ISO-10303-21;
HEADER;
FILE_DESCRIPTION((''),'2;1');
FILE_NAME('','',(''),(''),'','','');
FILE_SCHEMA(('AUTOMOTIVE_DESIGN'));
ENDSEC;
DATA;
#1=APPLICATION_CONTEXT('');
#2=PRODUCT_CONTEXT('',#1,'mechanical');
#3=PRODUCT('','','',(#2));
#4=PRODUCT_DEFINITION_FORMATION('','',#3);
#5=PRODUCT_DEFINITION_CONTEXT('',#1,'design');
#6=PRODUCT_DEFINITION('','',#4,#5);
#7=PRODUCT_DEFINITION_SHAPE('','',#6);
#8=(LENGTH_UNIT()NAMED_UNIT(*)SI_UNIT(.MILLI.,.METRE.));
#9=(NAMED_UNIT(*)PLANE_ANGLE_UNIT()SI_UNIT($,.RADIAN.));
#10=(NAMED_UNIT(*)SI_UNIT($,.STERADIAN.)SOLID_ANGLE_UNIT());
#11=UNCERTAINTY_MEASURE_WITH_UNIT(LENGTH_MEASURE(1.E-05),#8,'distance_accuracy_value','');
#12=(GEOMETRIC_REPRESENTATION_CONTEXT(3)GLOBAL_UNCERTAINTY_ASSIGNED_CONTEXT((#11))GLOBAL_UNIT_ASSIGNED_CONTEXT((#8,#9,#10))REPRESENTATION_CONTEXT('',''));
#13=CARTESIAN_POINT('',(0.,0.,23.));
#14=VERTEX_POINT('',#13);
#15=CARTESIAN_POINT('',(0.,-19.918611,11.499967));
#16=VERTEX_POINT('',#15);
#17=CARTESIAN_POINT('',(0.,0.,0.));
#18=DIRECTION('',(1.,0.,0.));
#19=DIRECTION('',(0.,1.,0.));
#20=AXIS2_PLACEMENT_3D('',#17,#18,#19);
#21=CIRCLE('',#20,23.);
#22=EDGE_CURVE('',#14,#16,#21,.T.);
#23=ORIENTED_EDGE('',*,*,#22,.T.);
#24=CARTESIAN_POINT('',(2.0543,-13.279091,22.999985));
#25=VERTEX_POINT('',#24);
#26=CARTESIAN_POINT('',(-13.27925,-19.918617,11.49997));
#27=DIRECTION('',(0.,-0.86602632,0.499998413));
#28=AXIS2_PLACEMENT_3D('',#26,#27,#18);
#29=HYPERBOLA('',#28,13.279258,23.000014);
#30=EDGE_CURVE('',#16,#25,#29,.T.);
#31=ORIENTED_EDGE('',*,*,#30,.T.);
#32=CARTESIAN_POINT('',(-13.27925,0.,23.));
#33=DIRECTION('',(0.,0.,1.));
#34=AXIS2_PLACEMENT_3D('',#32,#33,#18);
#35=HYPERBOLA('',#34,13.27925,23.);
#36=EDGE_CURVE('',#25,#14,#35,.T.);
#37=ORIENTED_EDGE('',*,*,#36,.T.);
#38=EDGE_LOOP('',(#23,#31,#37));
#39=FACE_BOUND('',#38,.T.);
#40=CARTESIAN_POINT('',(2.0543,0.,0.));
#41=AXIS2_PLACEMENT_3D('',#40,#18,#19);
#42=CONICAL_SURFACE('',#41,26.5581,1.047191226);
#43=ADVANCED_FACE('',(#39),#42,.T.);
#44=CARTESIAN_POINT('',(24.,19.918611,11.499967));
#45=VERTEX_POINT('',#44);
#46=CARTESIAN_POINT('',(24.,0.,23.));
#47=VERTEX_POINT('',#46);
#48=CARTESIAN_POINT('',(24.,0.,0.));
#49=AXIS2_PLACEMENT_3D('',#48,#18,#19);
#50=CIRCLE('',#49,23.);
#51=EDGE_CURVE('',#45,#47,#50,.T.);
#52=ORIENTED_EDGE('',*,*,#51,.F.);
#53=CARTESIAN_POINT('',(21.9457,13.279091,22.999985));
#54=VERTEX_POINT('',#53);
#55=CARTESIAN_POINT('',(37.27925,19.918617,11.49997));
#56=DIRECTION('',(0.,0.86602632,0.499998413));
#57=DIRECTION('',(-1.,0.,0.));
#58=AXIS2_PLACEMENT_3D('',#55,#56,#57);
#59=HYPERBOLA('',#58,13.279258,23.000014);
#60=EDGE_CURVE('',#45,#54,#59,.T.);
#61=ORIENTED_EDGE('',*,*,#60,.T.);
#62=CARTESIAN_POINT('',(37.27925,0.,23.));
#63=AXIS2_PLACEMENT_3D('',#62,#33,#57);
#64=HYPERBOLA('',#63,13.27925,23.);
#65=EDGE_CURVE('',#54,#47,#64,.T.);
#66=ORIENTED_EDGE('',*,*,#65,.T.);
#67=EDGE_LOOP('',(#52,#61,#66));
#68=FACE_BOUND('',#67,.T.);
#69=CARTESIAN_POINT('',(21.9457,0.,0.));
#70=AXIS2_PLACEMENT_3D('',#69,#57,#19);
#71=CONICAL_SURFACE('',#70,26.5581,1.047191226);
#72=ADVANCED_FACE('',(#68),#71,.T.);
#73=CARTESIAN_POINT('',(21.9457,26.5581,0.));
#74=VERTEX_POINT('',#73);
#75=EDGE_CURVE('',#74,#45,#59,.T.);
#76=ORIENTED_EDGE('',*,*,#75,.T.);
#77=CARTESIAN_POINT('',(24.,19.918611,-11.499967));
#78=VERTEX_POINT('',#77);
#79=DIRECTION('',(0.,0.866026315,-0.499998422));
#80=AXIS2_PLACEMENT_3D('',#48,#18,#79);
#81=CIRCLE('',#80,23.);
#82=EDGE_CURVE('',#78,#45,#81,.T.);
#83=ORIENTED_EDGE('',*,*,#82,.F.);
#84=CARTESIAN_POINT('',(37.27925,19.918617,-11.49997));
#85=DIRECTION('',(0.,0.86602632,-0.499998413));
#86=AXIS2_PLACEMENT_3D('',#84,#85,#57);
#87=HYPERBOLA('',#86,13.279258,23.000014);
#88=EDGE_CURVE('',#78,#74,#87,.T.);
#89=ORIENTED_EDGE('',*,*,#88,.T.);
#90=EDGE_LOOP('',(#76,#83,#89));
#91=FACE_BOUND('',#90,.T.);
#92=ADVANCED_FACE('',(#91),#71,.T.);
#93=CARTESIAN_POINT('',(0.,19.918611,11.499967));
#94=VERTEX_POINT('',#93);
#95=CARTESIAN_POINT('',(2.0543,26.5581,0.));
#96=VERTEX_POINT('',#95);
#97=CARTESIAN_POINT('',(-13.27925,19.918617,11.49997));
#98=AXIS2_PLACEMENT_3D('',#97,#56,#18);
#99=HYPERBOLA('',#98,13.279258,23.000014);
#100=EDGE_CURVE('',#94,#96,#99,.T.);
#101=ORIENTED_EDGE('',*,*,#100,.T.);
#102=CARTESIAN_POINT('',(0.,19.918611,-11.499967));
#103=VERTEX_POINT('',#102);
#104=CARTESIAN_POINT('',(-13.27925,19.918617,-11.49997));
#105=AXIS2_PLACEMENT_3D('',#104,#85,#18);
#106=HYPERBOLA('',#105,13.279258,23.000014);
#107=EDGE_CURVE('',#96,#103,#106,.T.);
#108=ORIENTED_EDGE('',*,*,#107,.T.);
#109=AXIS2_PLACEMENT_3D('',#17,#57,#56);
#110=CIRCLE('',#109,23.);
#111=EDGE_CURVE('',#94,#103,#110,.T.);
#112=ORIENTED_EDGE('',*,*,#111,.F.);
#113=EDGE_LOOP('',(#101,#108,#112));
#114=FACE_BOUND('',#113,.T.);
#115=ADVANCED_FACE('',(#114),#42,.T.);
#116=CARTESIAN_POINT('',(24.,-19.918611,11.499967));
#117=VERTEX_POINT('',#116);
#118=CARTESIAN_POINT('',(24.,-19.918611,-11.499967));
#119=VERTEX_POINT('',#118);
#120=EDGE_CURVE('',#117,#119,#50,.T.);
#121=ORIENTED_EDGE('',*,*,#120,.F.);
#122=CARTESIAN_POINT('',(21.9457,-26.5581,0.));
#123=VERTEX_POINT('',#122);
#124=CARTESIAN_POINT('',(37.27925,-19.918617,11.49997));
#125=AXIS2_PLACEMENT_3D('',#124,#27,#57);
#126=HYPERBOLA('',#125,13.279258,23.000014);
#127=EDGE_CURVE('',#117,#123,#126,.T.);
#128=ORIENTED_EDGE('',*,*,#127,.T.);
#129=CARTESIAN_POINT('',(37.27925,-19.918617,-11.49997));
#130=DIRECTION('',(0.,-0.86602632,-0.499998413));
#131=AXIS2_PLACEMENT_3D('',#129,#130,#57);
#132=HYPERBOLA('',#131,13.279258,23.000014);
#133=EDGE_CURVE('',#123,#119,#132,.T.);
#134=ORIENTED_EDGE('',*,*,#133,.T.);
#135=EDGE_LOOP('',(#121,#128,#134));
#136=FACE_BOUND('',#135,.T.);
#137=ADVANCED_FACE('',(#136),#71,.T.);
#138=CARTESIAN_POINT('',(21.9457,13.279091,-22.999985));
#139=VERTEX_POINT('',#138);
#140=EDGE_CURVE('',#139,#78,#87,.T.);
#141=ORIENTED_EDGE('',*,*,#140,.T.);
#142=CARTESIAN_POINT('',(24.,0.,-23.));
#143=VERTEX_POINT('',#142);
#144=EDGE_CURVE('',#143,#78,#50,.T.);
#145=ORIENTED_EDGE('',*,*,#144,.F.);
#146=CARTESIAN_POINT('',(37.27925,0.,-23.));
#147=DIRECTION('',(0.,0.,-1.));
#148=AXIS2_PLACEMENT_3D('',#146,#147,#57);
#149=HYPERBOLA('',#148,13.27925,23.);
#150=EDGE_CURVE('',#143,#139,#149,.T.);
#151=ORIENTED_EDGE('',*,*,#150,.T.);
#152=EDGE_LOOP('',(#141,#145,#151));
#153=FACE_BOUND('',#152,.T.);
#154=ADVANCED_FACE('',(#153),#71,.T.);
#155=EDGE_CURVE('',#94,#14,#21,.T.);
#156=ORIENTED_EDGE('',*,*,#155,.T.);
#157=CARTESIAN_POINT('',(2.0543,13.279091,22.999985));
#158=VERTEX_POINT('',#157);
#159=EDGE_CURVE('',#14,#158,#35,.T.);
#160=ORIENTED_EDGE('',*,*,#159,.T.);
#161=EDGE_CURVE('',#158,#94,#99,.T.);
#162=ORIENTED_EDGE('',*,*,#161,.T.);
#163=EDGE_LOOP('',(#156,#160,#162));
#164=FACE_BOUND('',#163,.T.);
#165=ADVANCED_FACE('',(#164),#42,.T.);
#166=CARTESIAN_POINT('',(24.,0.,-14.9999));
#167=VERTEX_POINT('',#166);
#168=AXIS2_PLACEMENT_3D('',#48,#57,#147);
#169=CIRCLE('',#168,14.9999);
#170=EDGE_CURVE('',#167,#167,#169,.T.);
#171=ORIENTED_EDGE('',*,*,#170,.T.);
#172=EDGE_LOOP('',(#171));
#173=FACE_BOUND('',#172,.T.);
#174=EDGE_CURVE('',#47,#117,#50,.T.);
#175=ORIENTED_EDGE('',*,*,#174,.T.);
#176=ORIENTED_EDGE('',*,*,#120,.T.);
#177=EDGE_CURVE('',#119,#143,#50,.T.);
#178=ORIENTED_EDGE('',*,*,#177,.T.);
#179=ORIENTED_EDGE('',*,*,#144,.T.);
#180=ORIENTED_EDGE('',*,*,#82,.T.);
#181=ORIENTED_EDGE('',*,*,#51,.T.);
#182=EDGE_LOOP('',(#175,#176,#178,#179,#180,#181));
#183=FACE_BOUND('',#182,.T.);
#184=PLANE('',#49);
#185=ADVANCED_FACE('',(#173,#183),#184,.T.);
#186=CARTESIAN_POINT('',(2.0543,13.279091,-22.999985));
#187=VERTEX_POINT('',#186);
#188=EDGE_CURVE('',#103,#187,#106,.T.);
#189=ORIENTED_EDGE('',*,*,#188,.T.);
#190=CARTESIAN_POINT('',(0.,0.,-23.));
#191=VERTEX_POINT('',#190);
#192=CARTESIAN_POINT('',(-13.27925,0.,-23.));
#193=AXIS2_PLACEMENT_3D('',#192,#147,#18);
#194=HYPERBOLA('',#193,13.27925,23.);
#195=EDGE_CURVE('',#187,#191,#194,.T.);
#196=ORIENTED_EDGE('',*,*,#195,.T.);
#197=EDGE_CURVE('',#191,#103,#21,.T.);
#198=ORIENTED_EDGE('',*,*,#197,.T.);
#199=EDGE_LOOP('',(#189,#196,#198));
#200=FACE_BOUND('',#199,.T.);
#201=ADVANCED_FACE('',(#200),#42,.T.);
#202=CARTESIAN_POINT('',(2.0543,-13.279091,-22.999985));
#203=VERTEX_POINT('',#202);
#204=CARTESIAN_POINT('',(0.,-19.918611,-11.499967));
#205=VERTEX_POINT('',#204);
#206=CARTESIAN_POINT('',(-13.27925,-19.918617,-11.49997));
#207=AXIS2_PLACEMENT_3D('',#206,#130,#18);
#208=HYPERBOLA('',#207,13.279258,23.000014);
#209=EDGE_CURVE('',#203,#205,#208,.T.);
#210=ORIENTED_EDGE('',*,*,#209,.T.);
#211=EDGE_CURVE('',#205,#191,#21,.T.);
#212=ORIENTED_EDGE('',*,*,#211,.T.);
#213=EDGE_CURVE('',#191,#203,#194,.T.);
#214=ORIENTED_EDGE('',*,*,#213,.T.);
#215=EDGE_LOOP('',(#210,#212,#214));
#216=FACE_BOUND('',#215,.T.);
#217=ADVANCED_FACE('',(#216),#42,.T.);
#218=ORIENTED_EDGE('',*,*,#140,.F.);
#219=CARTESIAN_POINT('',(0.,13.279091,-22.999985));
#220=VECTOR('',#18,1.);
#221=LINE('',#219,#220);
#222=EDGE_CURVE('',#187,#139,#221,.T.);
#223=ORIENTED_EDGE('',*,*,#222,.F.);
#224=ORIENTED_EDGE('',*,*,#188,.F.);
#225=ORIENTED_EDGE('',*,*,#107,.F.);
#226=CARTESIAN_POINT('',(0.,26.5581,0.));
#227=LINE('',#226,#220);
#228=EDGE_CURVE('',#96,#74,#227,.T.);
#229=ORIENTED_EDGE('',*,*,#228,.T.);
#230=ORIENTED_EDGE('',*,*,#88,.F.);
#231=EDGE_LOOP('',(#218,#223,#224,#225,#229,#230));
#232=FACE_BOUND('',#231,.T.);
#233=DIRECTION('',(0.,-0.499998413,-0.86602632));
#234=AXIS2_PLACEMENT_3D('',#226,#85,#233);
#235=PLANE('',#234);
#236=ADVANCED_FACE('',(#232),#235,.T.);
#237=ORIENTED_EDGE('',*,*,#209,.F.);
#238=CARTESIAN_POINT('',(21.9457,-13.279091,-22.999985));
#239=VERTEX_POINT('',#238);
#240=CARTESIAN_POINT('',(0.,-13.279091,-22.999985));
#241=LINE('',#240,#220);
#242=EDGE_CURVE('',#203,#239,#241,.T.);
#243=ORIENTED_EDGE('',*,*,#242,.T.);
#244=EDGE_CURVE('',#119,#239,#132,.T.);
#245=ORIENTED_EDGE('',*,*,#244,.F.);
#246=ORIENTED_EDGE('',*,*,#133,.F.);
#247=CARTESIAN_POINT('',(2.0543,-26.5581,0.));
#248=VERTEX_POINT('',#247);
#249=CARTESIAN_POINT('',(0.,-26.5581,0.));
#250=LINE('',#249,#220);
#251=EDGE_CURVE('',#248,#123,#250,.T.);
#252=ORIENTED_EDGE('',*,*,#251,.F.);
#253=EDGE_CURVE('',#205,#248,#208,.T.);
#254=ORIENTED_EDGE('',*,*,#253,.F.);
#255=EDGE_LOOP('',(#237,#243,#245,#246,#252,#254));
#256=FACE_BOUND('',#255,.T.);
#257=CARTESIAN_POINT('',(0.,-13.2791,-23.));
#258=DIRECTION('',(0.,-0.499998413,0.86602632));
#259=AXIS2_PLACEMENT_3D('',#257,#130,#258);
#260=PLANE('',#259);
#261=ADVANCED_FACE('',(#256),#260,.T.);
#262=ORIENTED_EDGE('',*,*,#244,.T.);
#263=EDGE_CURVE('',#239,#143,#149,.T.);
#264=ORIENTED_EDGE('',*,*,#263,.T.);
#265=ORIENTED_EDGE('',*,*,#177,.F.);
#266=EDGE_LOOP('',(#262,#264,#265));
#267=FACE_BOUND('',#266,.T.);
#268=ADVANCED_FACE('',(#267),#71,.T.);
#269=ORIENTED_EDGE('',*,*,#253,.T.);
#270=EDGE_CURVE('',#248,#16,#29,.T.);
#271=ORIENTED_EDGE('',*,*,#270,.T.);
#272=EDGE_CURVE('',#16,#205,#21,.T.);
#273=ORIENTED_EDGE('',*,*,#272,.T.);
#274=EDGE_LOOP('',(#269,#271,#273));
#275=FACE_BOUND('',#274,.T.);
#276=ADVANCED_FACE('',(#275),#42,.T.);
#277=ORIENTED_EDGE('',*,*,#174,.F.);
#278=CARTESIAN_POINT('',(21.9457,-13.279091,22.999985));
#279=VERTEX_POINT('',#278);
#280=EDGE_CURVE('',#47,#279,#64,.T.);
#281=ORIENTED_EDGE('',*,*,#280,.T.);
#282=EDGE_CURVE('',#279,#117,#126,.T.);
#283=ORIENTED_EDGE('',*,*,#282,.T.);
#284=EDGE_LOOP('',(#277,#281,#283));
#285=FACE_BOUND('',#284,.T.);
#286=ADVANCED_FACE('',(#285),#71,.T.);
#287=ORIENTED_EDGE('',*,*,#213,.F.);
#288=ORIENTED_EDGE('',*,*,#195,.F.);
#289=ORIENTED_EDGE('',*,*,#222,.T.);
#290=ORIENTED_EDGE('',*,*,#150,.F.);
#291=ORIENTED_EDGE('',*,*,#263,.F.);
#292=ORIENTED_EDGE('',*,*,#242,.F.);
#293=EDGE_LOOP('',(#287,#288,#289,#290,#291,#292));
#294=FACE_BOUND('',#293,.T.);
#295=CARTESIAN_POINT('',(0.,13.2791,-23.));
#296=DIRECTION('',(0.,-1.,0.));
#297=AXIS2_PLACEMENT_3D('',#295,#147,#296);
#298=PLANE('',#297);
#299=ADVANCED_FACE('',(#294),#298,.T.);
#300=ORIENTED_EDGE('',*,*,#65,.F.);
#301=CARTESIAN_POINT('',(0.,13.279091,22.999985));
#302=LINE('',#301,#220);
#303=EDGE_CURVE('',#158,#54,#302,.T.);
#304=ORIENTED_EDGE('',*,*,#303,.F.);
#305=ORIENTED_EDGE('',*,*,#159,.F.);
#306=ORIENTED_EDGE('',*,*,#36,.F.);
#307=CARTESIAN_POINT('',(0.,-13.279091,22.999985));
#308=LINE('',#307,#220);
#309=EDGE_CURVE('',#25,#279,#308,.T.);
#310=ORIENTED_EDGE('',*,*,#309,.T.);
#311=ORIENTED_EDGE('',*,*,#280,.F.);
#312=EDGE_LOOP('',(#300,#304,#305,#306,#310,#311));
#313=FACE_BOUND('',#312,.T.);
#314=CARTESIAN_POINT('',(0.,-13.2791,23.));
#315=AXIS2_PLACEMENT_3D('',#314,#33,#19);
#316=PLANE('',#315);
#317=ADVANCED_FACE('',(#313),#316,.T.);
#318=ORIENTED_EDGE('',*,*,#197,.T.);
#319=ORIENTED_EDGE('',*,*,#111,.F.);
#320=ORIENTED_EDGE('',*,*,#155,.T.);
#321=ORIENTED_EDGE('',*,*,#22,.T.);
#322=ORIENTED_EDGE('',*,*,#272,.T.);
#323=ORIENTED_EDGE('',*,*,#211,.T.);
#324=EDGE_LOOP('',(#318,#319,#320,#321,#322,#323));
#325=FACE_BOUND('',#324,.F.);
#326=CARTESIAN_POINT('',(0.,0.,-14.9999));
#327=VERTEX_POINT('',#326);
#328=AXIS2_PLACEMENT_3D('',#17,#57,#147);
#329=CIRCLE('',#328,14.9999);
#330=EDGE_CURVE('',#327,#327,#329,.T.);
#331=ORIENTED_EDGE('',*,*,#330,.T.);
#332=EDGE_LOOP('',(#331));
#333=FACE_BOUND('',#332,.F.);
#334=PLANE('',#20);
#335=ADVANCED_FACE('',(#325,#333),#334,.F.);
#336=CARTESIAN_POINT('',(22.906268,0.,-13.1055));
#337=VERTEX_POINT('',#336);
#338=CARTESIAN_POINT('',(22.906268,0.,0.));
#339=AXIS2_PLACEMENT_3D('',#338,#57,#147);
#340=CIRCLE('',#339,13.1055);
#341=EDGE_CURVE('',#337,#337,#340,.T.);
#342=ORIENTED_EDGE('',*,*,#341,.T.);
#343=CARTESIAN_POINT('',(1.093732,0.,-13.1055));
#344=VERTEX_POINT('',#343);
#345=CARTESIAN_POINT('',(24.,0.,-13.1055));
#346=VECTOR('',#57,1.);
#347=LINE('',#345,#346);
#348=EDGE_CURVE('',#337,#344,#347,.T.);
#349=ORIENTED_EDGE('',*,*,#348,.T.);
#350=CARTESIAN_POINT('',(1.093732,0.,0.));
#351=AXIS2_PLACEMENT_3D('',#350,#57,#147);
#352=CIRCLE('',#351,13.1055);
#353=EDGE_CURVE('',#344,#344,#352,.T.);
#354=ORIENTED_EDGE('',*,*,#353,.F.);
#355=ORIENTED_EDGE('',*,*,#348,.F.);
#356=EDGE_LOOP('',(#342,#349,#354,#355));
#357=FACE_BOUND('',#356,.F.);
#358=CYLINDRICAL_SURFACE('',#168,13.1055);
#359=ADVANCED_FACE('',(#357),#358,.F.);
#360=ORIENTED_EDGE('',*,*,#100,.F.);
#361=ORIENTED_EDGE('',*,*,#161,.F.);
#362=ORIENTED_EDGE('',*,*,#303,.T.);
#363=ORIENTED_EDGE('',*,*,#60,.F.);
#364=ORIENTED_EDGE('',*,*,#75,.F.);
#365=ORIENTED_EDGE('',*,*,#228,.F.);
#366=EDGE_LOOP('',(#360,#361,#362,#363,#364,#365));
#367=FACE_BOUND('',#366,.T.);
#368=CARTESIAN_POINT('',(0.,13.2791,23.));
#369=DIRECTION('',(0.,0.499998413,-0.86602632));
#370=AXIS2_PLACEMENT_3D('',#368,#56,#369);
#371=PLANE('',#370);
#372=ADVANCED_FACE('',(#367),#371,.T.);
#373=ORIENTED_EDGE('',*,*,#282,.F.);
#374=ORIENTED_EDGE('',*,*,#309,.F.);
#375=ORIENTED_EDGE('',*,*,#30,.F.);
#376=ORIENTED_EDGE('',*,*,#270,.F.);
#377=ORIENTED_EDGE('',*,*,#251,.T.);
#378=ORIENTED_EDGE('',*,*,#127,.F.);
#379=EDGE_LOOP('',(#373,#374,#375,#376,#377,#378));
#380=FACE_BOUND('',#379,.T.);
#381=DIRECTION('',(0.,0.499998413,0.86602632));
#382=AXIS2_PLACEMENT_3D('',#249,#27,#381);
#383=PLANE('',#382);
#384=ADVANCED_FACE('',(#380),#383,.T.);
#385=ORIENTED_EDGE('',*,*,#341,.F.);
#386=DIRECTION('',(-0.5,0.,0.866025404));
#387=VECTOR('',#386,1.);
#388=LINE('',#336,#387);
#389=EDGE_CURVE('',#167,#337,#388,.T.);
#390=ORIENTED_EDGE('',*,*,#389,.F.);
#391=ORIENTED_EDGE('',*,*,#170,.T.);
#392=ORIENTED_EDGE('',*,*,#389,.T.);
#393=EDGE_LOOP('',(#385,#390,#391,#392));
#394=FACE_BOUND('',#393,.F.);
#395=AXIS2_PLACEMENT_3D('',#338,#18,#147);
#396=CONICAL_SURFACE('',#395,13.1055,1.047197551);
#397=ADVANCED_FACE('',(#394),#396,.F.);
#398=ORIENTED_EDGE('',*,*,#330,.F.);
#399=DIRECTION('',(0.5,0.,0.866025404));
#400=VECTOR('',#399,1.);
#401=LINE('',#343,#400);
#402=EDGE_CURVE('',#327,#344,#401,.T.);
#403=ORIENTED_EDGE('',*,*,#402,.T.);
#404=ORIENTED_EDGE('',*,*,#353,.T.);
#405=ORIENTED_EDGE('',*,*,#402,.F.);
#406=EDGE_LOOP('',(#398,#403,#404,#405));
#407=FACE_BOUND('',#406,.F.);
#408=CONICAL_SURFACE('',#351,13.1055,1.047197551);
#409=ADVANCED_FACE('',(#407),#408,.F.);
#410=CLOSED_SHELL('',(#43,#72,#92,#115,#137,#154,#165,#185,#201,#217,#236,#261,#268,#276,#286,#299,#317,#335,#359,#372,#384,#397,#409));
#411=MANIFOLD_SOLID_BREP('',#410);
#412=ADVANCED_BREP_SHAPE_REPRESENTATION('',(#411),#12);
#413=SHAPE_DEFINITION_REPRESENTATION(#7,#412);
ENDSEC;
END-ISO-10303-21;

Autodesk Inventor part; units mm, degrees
ref_plane "YZ Plane" through (0, 0, 0) normal (1, 0, 0) x (0, 1, 0)
ref_plane "XZ Plane" through (0, 0, 0) normal (0, 1, 0) x (-1, 0, 0)
ref_plane "XY Plane" through (0, 0, 0) normal (0, 0, 1) x (1, 0, 0)
sketch "Sketch1" plane through (0, 0, 0) normal (1, 0, 0) x (0, 1, 0)
  line L0 (-26.5581, 0) -> (-13.2791, 23)
  line L1 (-13.2791, 23) -> (13.2791, 23)
  line L2 (13.2791, 23) -> (26.5581, 0)
  line L3 (26.5581, 0) -> (13.2791, -23)
  line L4 (13.2791, -23) -> (-13.2791, -23)
  line L5 (-13.2791, -23) -> (-26.5581, 0)
  point P0 (0, 0)
  point P1 (0, 0)
  dimension "d0" = 53.1162
extrude "Body" add sketch "Sketch1" along normal blind 24
sketch "Sketch2" plane through (0, 0, 0) normal (0, 0, 1) x (1, 0, 0)
  line L0 (0, 13.2791) -> (0, 26.5581) projected
  line L1 (0, 26.5581) -> (24, 26.5581) projected
  line L2 (24, 13.2791) -> (24, 26.5581) projected
  line L3 (-2.4, 0) -> (31.2, 0) projected
  line L4 (2.0543, 26.5581) -> (0, 23)
  line L5 (21.9457, 26.5581) -> (24, 23)
  dimension "d3" = 30
  dimension "d4" = 30
  dimension "d5" = 46
  dimension "d6" = 46
revolve "Chamfer1" cut sketch "Sketch2" angle 360 about axis through (-10, 0, 0) along (1, 0, 0)
sketch "Sketch3" plane through (24, 0, 0) normal (1, 0, 0) x (0, 0, -1)
  arc A0 (-11.5, -19.9186) -> (11.5, -19.9186) centre (0, 0) ccw projected
hole "Thread" at (24, 0, 0) direction (-1, 0, 0) diameter 26.211 end through all thread size "M30x3.5" class "6H" standard "ISO Metric profile"
chamfer "Chamfer2" distance 1.8944 angle 30 1 edges at (24, 0, 13.1055) measured on face at (24, 19.586, -0.5266)
chamfer "Chamfer3" distance 1.8944 angle 30 1 edges at (0, 0, 13.1055) measured on face at (0, 19.586, -0.5266)
equation "\"d0\" = 1.1547 * SW"
equation "\"d1\" = KOH"
equation "\"d3\" = ANG1"
equation "\"d4\" = ANG2"
equation "\"d5\" = SW0"
equation "\"d6\" = SW01"
equation "\"d8\" = -0.5 * GD1 + 0.5 * NND"
equation "\"d40\" = -0.5 * GD1 + 0.5 * NND"
equation "\"d10\" = -0.5 * GD1 + 0.5 * NND"
equation "\"d41\" = -0.5 * GD1 + 0.5 * NND"
equation "\"ANG1\" = 30deg"
equation "\"ANG2\" = ANG1"
equation "\"KOH\" = 24"
equation "\"SW\" = 46"
equation "\"SW0\" = SW"
equation "\"SW01\" = SW"
equation "\"TOA\" = 30deg"
equation "\"PTC\" = TPU"
equation "\"GAL\" = 0.541266 * TPU"
equation "\"GUL\" = 0.541266 * TPU"
equation "\"TPU\" = 3.5"
equation "\"E0\" = 1.155 * SW"
equation "\"GD1\" = 26.211139"
equation "\"NND\" = 30"
properties part number "BS 3692 - M30"
